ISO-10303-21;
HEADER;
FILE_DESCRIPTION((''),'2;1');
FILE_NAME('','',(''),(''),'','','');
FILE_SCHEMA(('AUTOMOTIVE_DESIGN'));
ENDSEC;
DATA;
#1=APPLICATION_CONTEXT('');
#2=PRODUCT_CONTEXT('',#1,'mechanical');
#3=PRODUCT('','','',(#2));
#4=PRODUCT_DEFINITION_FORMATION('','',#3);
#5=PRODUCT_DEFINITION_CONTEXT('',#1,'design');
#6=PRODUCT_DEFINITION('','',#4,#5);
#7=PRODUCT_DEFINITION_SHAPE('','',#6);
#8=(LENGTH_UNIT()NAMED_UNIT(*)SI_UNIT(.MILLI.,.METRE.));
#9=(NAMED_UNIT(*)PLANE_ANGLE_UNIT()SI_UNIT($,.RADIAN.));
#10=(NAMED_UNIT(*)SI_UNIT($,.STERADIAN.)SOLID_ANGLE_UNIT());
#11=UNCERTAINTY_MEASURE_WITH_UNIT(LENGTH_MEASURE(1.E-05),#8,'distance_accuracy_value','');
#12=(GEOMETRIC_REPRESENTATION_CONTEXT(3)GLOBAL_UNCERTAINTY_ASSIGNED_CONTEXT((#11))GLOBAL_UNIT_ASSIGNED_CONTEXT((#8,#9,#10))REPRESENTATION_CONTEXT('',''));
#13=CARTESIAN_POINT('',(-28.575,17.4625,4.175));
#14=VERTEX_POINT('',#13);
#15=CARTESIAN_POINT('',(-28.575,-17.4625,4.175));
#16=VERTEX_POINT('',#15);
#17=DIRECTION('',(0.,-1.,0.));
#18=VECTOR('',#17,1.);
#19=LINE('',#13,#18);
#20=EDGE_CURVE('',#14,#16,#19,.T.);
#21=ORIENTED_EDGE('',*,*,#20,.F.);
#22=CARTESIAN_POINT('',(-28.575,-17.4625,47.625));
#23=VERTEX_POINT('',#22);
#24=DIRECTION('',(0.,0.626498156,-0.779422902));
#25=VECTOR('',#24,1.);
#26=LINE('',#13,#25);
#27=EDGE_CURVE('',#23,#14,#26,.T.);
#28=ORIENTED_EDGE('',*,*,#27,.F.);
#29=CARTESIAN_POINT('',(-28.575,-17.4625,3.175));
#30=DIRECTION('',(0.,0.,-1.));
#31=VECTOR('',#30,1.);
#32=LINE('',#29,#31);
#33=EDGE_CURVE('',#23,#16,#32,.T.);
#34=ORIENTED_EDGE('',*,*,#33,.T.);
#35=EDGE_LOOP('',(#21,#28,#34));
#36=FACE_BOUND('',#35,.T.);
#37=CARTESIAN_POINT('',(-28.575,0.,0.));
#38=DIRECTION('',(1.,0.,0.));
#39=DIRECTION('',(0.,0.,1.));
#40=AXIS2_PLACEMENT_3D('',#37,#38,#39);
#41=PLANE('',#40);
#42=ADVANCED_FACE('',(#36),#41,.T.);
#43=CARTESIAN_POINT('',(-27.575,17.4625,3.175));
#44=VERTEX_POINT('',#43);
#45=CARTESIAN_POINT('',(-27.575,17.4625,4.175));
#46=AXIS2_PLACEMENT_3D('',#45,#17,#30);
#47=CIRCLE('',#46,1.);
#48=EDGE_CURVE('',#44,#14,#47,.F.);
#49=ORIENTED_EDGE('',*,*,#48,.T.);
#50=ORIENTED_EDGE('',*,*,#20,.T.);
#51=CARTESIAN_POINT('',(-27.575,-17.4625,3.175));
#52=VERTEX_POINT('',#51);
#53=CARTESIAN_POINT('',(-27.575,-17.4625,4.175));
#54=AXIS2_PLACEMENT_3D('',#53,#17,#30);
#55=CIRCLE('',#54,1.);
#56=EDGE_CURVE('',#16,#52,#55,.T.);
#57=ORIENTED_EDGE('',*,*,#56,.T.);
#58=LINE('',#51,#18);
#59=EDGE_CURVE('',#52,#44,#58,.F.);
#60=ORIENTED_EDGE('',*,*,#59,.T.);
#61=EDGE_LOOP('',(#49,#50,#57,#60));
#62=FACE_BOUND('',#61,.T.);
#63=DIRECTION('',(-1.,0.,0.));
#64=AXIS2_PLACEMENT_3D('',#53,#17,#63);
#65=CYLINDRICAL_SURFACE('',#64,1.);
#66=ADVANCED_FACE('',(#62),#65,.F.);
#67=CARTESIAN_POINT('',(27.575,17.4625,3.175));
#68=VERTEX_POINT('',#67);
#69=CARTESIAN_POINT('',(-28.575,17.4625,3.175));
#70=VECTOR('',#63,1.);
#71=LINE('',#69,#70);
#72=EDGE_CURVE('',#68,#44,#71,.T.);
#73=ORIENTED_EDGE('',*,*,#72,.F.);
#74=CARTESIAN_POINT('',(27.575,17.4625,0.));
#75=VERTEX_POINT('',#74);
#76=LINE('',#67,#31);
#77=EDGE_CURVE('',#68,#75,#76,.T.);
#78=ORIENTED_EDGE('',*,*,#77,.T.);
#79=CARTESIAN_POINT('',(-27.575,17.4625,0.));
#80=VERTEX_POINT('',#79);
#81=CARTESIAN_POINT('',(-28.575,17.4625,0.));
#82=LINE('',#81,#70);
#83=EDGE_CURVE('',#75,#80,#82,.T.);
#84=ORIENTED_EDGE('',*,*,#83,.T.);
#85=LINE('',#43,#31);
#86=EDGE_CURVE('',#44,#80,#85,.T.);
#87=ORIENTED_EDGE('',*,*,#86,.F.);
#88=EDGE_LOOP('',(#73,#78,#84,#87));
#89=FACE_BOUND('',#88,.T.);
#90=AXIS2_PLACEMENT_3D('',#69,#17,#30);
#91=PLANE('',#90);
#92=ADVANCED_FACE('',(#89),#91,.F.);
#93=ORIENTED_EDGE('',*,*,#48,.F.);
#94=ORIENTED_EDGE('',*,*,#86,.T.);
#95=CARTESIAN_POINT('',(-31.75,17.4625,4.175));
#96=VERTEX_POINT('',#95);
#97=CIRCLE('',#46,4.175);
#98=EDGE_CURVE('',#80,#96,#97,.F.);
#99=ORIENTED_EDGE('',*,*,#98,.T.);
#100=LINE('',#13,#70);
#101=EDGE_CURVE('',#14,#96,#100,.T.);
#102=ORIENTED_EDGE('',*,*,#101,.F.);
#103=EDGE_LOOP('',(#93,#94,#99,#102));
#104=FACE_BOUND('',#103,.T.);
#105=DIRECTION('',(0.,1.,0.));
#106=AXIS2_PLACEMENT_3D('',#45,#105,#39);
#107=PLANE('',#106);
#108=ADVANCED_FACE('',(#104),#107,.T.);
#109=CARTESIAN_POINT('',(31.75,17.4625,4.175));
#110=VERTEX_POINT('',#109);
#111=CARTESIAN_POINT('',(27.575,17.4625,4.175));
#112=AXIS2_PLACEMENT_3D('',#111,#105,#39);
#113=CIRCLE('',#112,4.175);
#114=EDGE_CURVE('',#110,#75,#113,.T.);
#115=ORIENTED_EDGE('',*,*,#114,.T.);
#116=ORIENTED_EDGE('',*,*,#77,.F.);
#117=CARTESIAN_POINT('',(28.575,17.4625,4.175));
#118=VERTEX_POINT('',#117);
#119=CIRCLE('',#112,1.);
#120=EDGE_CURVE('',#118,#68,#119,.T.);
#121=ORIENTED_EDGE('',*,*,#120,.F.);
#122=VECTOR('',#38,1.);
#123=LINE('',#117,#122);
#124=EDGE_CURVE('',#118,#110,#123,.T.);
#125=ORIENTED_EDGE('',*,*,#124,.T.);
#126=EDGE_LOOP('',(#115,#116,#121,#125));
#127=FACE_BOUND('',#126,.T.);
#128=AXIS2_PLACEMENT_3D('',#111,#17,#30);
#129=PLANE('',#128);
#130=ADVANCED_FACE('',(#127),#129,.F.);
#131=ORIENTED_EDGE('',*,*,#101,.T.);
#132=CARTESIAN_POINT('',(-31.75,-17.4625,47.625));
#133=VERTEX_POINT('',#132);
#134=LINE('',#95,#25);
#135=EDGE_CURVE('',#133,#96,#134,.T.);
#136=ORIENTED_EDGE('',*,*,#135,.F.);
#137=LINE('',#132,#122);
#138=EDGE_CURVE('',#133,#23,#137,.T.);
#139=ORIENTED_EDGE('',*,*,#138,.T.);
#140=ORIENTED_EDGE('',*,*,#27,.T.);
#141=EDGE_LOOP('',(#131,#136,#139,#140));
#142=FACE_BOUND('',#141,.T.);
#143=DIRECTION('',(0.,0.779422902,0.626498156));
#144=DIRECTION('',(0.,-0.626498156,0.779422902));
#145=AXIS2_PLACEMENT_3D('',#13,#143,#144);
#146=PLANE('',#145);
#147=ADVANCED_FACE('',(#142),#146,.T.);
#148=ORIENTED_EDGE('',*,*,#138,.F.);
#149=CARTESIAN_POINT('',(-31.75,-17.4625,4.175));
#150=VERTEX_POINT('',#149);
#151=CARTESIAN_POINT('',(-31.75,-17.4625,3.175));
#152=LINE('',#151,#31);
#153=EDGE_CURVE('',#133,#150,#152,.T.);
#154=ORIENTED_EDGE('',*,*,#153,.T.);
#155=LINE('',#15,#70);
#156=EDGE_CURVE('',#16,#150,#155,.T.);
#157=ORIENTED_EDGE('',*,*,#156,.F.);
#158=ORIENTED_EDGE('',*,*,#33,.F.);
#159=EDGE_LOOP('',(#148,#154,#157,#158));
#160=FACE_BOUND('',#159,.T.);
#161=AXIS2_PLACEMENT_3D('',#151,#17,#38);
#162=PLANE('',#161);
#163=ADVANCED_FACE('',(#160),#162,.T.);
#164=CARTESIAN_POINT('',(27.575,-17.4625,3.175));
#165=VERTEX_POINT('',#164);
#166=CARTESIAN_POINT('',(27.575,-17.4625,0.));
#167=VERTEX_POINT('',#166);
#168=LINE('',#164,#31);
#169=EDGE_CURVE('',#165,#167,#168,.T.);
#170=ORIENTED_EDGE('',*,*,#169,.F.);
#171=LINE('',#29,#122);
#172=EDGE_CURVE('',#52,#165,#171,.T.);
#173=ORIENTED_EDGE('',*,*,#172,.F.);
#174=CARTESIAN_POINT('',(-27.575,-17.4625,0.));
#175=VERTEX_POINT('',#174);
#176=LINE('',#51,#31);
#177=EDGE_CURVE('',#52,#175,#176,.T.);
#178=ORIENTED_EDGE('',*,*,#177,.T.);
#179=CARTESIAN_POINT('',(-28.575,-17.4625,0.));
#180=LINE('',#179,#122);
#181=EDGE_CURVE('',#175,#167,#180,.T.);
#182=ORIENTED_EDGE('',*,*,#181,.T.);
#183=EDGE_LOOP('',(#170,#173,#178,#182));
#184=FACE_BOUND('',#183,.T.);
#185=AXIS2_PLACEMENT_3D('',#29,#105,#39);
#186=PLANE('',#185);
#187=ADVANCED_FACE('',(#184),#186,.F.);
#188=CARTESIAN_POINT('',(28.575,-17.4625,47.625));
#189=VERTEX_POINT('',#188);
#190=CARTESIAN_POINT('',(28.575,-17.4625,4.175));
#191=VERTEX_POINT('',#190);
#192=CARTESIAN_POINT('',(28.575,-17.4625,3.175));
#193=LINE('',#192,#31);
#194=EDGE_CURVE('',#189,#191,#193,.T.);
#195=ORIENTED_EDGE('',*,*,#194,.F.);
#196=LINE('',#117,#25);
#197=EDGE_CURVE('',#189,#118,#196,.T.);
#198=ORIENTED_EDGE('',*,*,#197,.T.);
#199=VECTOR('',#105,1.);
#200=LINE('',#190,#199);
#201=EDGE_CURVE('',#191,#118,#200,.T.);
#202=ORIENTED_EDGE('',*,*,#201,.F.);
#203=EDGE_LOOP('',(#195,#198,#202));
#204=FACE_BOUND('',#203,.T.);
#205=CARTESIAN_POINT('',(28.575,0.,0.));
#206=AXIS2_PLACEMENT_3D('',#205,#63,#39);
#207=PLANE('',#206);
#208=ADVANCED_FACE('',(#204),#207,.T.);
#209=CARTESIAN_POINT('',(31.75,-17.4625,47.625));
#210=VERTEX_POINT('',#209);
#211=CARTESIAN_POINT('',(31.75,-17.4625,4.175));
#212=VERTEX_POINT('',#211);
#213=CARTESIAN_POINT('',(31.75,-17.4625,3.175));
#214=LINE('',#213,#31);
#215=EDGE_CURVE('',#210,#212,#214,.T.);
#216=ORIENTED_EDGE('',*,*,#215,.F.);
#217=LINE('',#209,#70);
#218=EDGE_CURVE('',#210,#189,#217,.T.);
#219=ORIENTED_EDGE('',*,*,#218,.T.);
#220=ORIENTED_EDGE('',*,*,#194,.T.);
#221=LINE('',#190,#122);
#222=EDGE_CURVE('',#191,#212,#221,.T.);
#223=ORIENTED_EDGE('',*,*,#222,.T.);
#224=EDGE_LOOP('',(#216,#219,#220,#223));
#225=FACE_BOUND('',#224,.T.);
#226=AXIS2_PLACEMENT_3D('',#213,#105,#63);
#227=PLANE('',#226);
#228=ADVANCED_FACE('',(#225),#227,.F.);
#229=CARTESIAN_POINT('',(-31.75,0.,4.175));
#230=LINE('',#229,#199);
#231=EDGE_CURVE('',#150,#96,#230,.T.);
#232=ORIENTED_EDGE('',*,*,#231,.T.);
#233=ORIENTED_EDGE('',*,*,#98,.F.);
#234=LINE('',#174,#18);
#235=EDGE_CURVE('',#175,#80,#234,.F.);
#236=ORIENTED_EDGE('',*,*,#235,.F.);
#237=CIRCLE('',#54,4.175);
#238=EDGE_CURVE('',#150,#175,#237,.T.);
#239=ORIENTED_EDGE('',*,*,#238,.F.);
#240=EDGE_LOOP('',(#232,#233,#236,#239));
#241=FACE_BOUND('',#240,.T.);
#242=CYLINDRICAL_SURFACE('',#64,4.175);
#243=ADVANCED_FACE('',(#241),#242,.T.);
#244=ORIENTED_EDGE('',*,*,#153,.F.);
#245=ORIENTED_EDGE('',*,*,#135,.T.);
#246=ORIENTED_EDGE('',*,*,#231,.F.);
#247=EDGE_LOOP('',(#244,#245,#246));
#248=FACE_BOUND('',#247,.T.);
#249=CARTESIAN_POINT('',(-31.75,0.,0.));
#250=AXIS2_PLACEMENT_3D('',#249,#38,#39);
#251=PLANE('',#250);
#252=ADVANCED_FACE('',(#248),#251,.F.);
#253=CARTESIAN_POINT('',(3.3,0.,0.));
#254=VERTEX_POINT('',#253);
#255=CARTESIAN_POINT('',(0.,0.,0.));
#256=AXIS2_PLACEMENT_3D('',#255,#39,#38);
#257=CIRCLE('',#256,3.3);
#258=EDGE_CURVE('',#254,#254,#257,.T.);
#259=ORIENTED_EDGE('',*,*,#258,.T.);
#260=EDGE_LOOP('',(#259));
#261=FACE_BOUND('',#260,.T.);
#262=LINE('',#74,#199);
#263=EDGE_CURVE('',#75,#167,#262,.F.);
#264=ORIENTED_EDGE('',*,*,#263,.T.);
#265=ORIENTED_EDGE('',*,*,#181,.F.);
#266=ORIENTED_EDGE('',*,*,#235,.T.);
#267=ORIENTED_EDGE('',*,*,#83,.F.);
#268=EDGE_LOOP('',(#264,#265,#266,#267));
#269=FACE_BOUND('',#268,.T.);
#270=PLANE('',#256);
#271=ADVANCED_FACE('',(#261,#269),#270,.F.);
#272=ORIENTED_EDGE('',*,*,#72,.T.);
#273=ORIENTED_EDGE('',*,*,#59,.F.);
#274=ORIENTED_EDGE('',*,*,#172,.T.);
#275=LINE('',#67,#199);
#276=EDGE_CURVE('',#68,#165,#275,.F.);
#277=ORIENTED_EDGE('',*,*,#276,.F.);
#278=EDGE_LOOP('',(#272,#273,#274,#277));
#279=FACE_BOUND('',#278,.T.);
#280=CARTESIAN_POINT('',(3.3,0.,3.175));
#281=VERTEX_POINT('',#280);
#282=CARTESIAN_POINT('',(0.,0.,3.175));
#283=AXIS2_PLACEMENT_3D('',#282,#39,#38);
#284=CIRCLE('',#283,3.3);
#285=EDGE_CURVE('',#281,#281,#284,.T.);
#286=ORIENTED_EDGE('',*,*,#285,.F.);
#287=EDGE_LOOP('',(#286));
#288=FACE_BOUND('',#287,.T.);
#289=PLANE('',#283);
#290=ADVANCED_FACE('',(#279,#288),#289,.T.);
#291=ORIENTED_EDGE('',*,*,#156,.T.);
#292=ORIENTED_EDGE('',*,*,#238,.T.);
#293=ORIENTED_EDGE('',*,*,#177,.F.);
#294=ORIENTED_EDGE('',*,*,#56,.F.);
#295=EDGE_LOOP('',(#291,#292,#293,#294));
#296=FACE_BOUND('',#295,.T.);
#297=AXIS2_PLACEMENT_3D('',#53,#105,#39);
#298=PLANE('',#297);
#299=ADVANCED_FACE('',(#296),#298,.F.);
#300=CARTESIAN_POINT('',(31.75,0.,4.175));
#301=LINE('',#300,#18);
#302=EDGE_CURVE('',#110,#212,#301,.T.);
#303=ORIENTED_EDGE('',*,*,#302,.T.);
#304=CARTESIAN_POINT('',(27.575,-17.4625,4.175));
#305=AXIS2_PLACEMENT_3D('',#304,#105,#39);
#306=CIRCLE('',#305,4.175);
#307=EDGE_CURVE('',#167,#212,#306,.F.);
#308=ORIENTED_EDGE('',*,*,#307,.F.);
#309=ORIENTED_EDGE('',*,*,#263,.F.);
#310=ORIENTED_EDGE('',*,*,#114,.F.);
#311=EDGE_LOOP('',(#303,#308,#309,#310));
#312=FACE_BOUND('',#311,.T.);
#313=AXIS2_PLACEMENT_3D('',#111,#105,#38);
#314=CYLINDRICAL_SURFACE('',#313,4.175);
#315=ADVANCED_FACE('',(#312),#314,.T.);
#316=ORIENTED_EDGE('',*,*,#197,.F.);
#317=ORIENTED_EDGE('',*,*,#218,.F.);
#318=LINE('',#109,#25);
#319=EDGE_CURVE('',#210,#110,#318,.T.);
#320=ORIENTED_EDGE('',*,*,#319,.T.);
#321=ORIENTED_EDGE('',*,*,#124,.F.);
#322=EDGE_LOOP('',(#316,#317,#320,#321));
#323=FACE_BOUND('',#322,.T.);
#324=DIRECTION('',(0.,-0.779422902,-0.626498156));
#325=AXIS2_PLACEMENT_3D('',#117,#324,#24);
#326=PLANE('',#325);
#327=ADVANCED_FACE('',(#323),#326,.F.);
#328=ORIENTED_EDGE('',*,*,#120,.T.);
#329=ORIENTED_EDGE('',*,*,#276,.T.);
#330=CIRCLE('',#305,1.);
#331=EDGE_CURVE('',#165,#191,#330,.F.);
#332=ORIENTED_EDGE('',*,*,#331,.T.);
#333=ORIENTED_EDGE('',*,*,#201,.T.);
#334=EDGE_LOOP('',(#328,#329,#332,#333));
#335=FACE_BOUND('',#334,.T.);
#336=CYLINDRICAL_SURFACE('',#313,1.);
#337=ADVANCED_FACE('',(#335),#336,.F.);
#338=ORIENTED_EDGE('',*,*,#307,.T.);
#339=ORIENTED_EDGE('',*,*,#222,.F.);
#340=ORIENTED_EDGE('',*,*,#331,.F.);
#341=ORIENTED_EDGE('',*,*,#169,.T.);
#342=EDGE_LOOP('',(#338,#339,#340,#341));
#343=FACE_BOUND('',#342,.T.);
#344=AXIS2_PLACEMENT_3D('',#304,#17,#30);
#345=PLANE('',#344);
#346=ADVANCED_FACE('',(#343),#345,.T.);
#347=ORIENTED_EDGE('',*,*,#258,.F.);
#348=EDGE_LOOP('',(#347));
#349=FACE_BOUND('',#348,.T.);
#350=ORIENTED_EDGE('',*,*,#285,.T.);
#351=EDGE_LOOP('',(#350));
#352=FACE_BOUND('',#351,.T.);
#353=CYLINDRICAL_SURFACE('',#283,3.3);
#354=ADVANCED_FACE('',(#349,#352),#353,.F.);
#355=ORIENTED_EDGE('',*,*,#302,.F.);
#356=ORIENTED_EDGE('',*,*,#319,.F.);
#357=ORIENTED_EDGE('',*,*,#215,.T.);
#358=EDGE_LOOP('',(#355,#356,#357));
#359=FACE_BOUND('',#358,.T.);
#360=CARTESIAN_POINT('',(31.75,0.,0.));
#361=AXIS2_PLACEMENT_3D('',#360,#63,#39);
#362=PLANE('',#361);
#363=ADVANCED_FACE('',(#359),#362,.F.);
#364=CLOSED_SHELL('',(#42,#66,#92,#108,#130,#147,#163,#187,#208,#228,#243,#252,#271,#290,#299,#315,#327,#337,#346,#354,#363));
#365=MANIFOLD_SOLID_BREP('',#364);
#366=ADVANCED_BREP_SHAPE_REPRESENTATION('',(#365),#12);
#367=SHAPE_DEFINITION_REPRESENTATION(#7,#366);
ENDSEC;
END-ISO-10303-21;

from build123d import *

# Parameters (mm, degrees)
SKETCH2_W                    = 57.15
SKETCH2_H                    = 34.925
BASE_FLANGE1_DEPTH           = 3.175
EDGE_FLANGE1_STRIP_W         = 14.7
EDGE_FLANGE1_STRIP_H         = 3.175
EDGE_FLANGE1_STRIP_CUT_DEPTH = 34.925
EDGE_FLANGE1_DEPTH           = 34.925
CUT_EXTRUDE1_DEPTH           = 3.175
M6_CLEARANCE_HOLE1_D         = 6.6


# Sheet-metal steps are written as plain solids
with BuildPart() as part:
    # Sketch2 → Base-Flange1 (new body)
    with BuildSketch(Plane.XY):
        Rectangle(SKETCH2_W, SKETCH2_H)
    extrude(amount=BASE_FLANGE1_DEPTH)

    # Edge-Flange1 strip (across the edge) → Edge-Flange1 strip cut (cut)
    with BuildSketch(Plane(origin=(28.575, -17.4625, 3.175), x_dir=(-1, 0, 0), z_dir=(0, 1, 0))):
        with Locations((-6.35, -1.5875)):
            Rectangle(EDGE_FLANGE1_STRIP_W, EDGE_FLANGE1_STRIP_H)
    edge_flange1_strip_cut = extrude(amount=EDGE_FLANGE1_STRIP_CUT_DEPTH, mode=Mode.SUBTRACT)

    # Edge-Flange1 section (across the edge) → Edge-Flange1 (add)
    with BuildSketch(Plane(origin=(28.575, -17.4625, 3.175), x_dir=(-1, 0, 0), z_dir=(0, 1, 0))):
        with BuildLine():
            Line((-3.175, 1), (-3.175, 44.45))
            Line((-3.175, 44.45), (0, 44.45))
            Line((0, 44.45), (0, 1))
            ThreePointArc((0, 1), (0.292893219, 0.292893219), (1, 0))
            Line((1, 0), (1, -3.175))
            ThreePointArc((1, -3.175), (-1.952170811, -1.952170811), (-3.175, 1))
        make_face()
    edge_flange1 = extrude(amount=EDGE_FLANGE1_DEPTH)

    # Sketch10 → Cut-Extrude1 (cut)
    with BuildSketch(Plane(origin=(31.75, 0, 0), x_dir=(0, 0, -1), z_dir=(1, 0, 0))):
        Polygon((-4.175, 17.4625), (-47.625, -17.4625), (-47.625, 17.4625), align=None)
    cut_extrude1 = extrude(amount=-CUT_EXTRUDE1_DEPTH, mode=Mode.SUBTRACT)

    # Mirror1: Edge-Flange1 strip cut, Edge-Flange1, Cut-Extrude1 across plane
    add(edge_flange1_strip_cut.mirror(Plane(origin=(0, 0, 0), x_dir=(0, 0, 1), z_dir=(1, 0, 0))), mode=Mode.SUBTRACT)
    add(edge_flange1.mirror(Plane(origin=(0, 0, 0), x_dir=(0, 0, 1), z_dir=(1, 0, 0))))
    add(cut_extrude1.mirror(Plane(origin=(0, 0, 0), x_dir=(0, 0, 1), z_dir=(1, 0, 0))), mode=Mode.SUBTRACT)

    # M6 Clearance Hole1 (through all)
    with Locations(Plane.XY.offset(3.175)):
        with Locations((0, 0)):
            Hole(M6_CLEARANCE_HOLE1_D / 2)


solid = part.part
